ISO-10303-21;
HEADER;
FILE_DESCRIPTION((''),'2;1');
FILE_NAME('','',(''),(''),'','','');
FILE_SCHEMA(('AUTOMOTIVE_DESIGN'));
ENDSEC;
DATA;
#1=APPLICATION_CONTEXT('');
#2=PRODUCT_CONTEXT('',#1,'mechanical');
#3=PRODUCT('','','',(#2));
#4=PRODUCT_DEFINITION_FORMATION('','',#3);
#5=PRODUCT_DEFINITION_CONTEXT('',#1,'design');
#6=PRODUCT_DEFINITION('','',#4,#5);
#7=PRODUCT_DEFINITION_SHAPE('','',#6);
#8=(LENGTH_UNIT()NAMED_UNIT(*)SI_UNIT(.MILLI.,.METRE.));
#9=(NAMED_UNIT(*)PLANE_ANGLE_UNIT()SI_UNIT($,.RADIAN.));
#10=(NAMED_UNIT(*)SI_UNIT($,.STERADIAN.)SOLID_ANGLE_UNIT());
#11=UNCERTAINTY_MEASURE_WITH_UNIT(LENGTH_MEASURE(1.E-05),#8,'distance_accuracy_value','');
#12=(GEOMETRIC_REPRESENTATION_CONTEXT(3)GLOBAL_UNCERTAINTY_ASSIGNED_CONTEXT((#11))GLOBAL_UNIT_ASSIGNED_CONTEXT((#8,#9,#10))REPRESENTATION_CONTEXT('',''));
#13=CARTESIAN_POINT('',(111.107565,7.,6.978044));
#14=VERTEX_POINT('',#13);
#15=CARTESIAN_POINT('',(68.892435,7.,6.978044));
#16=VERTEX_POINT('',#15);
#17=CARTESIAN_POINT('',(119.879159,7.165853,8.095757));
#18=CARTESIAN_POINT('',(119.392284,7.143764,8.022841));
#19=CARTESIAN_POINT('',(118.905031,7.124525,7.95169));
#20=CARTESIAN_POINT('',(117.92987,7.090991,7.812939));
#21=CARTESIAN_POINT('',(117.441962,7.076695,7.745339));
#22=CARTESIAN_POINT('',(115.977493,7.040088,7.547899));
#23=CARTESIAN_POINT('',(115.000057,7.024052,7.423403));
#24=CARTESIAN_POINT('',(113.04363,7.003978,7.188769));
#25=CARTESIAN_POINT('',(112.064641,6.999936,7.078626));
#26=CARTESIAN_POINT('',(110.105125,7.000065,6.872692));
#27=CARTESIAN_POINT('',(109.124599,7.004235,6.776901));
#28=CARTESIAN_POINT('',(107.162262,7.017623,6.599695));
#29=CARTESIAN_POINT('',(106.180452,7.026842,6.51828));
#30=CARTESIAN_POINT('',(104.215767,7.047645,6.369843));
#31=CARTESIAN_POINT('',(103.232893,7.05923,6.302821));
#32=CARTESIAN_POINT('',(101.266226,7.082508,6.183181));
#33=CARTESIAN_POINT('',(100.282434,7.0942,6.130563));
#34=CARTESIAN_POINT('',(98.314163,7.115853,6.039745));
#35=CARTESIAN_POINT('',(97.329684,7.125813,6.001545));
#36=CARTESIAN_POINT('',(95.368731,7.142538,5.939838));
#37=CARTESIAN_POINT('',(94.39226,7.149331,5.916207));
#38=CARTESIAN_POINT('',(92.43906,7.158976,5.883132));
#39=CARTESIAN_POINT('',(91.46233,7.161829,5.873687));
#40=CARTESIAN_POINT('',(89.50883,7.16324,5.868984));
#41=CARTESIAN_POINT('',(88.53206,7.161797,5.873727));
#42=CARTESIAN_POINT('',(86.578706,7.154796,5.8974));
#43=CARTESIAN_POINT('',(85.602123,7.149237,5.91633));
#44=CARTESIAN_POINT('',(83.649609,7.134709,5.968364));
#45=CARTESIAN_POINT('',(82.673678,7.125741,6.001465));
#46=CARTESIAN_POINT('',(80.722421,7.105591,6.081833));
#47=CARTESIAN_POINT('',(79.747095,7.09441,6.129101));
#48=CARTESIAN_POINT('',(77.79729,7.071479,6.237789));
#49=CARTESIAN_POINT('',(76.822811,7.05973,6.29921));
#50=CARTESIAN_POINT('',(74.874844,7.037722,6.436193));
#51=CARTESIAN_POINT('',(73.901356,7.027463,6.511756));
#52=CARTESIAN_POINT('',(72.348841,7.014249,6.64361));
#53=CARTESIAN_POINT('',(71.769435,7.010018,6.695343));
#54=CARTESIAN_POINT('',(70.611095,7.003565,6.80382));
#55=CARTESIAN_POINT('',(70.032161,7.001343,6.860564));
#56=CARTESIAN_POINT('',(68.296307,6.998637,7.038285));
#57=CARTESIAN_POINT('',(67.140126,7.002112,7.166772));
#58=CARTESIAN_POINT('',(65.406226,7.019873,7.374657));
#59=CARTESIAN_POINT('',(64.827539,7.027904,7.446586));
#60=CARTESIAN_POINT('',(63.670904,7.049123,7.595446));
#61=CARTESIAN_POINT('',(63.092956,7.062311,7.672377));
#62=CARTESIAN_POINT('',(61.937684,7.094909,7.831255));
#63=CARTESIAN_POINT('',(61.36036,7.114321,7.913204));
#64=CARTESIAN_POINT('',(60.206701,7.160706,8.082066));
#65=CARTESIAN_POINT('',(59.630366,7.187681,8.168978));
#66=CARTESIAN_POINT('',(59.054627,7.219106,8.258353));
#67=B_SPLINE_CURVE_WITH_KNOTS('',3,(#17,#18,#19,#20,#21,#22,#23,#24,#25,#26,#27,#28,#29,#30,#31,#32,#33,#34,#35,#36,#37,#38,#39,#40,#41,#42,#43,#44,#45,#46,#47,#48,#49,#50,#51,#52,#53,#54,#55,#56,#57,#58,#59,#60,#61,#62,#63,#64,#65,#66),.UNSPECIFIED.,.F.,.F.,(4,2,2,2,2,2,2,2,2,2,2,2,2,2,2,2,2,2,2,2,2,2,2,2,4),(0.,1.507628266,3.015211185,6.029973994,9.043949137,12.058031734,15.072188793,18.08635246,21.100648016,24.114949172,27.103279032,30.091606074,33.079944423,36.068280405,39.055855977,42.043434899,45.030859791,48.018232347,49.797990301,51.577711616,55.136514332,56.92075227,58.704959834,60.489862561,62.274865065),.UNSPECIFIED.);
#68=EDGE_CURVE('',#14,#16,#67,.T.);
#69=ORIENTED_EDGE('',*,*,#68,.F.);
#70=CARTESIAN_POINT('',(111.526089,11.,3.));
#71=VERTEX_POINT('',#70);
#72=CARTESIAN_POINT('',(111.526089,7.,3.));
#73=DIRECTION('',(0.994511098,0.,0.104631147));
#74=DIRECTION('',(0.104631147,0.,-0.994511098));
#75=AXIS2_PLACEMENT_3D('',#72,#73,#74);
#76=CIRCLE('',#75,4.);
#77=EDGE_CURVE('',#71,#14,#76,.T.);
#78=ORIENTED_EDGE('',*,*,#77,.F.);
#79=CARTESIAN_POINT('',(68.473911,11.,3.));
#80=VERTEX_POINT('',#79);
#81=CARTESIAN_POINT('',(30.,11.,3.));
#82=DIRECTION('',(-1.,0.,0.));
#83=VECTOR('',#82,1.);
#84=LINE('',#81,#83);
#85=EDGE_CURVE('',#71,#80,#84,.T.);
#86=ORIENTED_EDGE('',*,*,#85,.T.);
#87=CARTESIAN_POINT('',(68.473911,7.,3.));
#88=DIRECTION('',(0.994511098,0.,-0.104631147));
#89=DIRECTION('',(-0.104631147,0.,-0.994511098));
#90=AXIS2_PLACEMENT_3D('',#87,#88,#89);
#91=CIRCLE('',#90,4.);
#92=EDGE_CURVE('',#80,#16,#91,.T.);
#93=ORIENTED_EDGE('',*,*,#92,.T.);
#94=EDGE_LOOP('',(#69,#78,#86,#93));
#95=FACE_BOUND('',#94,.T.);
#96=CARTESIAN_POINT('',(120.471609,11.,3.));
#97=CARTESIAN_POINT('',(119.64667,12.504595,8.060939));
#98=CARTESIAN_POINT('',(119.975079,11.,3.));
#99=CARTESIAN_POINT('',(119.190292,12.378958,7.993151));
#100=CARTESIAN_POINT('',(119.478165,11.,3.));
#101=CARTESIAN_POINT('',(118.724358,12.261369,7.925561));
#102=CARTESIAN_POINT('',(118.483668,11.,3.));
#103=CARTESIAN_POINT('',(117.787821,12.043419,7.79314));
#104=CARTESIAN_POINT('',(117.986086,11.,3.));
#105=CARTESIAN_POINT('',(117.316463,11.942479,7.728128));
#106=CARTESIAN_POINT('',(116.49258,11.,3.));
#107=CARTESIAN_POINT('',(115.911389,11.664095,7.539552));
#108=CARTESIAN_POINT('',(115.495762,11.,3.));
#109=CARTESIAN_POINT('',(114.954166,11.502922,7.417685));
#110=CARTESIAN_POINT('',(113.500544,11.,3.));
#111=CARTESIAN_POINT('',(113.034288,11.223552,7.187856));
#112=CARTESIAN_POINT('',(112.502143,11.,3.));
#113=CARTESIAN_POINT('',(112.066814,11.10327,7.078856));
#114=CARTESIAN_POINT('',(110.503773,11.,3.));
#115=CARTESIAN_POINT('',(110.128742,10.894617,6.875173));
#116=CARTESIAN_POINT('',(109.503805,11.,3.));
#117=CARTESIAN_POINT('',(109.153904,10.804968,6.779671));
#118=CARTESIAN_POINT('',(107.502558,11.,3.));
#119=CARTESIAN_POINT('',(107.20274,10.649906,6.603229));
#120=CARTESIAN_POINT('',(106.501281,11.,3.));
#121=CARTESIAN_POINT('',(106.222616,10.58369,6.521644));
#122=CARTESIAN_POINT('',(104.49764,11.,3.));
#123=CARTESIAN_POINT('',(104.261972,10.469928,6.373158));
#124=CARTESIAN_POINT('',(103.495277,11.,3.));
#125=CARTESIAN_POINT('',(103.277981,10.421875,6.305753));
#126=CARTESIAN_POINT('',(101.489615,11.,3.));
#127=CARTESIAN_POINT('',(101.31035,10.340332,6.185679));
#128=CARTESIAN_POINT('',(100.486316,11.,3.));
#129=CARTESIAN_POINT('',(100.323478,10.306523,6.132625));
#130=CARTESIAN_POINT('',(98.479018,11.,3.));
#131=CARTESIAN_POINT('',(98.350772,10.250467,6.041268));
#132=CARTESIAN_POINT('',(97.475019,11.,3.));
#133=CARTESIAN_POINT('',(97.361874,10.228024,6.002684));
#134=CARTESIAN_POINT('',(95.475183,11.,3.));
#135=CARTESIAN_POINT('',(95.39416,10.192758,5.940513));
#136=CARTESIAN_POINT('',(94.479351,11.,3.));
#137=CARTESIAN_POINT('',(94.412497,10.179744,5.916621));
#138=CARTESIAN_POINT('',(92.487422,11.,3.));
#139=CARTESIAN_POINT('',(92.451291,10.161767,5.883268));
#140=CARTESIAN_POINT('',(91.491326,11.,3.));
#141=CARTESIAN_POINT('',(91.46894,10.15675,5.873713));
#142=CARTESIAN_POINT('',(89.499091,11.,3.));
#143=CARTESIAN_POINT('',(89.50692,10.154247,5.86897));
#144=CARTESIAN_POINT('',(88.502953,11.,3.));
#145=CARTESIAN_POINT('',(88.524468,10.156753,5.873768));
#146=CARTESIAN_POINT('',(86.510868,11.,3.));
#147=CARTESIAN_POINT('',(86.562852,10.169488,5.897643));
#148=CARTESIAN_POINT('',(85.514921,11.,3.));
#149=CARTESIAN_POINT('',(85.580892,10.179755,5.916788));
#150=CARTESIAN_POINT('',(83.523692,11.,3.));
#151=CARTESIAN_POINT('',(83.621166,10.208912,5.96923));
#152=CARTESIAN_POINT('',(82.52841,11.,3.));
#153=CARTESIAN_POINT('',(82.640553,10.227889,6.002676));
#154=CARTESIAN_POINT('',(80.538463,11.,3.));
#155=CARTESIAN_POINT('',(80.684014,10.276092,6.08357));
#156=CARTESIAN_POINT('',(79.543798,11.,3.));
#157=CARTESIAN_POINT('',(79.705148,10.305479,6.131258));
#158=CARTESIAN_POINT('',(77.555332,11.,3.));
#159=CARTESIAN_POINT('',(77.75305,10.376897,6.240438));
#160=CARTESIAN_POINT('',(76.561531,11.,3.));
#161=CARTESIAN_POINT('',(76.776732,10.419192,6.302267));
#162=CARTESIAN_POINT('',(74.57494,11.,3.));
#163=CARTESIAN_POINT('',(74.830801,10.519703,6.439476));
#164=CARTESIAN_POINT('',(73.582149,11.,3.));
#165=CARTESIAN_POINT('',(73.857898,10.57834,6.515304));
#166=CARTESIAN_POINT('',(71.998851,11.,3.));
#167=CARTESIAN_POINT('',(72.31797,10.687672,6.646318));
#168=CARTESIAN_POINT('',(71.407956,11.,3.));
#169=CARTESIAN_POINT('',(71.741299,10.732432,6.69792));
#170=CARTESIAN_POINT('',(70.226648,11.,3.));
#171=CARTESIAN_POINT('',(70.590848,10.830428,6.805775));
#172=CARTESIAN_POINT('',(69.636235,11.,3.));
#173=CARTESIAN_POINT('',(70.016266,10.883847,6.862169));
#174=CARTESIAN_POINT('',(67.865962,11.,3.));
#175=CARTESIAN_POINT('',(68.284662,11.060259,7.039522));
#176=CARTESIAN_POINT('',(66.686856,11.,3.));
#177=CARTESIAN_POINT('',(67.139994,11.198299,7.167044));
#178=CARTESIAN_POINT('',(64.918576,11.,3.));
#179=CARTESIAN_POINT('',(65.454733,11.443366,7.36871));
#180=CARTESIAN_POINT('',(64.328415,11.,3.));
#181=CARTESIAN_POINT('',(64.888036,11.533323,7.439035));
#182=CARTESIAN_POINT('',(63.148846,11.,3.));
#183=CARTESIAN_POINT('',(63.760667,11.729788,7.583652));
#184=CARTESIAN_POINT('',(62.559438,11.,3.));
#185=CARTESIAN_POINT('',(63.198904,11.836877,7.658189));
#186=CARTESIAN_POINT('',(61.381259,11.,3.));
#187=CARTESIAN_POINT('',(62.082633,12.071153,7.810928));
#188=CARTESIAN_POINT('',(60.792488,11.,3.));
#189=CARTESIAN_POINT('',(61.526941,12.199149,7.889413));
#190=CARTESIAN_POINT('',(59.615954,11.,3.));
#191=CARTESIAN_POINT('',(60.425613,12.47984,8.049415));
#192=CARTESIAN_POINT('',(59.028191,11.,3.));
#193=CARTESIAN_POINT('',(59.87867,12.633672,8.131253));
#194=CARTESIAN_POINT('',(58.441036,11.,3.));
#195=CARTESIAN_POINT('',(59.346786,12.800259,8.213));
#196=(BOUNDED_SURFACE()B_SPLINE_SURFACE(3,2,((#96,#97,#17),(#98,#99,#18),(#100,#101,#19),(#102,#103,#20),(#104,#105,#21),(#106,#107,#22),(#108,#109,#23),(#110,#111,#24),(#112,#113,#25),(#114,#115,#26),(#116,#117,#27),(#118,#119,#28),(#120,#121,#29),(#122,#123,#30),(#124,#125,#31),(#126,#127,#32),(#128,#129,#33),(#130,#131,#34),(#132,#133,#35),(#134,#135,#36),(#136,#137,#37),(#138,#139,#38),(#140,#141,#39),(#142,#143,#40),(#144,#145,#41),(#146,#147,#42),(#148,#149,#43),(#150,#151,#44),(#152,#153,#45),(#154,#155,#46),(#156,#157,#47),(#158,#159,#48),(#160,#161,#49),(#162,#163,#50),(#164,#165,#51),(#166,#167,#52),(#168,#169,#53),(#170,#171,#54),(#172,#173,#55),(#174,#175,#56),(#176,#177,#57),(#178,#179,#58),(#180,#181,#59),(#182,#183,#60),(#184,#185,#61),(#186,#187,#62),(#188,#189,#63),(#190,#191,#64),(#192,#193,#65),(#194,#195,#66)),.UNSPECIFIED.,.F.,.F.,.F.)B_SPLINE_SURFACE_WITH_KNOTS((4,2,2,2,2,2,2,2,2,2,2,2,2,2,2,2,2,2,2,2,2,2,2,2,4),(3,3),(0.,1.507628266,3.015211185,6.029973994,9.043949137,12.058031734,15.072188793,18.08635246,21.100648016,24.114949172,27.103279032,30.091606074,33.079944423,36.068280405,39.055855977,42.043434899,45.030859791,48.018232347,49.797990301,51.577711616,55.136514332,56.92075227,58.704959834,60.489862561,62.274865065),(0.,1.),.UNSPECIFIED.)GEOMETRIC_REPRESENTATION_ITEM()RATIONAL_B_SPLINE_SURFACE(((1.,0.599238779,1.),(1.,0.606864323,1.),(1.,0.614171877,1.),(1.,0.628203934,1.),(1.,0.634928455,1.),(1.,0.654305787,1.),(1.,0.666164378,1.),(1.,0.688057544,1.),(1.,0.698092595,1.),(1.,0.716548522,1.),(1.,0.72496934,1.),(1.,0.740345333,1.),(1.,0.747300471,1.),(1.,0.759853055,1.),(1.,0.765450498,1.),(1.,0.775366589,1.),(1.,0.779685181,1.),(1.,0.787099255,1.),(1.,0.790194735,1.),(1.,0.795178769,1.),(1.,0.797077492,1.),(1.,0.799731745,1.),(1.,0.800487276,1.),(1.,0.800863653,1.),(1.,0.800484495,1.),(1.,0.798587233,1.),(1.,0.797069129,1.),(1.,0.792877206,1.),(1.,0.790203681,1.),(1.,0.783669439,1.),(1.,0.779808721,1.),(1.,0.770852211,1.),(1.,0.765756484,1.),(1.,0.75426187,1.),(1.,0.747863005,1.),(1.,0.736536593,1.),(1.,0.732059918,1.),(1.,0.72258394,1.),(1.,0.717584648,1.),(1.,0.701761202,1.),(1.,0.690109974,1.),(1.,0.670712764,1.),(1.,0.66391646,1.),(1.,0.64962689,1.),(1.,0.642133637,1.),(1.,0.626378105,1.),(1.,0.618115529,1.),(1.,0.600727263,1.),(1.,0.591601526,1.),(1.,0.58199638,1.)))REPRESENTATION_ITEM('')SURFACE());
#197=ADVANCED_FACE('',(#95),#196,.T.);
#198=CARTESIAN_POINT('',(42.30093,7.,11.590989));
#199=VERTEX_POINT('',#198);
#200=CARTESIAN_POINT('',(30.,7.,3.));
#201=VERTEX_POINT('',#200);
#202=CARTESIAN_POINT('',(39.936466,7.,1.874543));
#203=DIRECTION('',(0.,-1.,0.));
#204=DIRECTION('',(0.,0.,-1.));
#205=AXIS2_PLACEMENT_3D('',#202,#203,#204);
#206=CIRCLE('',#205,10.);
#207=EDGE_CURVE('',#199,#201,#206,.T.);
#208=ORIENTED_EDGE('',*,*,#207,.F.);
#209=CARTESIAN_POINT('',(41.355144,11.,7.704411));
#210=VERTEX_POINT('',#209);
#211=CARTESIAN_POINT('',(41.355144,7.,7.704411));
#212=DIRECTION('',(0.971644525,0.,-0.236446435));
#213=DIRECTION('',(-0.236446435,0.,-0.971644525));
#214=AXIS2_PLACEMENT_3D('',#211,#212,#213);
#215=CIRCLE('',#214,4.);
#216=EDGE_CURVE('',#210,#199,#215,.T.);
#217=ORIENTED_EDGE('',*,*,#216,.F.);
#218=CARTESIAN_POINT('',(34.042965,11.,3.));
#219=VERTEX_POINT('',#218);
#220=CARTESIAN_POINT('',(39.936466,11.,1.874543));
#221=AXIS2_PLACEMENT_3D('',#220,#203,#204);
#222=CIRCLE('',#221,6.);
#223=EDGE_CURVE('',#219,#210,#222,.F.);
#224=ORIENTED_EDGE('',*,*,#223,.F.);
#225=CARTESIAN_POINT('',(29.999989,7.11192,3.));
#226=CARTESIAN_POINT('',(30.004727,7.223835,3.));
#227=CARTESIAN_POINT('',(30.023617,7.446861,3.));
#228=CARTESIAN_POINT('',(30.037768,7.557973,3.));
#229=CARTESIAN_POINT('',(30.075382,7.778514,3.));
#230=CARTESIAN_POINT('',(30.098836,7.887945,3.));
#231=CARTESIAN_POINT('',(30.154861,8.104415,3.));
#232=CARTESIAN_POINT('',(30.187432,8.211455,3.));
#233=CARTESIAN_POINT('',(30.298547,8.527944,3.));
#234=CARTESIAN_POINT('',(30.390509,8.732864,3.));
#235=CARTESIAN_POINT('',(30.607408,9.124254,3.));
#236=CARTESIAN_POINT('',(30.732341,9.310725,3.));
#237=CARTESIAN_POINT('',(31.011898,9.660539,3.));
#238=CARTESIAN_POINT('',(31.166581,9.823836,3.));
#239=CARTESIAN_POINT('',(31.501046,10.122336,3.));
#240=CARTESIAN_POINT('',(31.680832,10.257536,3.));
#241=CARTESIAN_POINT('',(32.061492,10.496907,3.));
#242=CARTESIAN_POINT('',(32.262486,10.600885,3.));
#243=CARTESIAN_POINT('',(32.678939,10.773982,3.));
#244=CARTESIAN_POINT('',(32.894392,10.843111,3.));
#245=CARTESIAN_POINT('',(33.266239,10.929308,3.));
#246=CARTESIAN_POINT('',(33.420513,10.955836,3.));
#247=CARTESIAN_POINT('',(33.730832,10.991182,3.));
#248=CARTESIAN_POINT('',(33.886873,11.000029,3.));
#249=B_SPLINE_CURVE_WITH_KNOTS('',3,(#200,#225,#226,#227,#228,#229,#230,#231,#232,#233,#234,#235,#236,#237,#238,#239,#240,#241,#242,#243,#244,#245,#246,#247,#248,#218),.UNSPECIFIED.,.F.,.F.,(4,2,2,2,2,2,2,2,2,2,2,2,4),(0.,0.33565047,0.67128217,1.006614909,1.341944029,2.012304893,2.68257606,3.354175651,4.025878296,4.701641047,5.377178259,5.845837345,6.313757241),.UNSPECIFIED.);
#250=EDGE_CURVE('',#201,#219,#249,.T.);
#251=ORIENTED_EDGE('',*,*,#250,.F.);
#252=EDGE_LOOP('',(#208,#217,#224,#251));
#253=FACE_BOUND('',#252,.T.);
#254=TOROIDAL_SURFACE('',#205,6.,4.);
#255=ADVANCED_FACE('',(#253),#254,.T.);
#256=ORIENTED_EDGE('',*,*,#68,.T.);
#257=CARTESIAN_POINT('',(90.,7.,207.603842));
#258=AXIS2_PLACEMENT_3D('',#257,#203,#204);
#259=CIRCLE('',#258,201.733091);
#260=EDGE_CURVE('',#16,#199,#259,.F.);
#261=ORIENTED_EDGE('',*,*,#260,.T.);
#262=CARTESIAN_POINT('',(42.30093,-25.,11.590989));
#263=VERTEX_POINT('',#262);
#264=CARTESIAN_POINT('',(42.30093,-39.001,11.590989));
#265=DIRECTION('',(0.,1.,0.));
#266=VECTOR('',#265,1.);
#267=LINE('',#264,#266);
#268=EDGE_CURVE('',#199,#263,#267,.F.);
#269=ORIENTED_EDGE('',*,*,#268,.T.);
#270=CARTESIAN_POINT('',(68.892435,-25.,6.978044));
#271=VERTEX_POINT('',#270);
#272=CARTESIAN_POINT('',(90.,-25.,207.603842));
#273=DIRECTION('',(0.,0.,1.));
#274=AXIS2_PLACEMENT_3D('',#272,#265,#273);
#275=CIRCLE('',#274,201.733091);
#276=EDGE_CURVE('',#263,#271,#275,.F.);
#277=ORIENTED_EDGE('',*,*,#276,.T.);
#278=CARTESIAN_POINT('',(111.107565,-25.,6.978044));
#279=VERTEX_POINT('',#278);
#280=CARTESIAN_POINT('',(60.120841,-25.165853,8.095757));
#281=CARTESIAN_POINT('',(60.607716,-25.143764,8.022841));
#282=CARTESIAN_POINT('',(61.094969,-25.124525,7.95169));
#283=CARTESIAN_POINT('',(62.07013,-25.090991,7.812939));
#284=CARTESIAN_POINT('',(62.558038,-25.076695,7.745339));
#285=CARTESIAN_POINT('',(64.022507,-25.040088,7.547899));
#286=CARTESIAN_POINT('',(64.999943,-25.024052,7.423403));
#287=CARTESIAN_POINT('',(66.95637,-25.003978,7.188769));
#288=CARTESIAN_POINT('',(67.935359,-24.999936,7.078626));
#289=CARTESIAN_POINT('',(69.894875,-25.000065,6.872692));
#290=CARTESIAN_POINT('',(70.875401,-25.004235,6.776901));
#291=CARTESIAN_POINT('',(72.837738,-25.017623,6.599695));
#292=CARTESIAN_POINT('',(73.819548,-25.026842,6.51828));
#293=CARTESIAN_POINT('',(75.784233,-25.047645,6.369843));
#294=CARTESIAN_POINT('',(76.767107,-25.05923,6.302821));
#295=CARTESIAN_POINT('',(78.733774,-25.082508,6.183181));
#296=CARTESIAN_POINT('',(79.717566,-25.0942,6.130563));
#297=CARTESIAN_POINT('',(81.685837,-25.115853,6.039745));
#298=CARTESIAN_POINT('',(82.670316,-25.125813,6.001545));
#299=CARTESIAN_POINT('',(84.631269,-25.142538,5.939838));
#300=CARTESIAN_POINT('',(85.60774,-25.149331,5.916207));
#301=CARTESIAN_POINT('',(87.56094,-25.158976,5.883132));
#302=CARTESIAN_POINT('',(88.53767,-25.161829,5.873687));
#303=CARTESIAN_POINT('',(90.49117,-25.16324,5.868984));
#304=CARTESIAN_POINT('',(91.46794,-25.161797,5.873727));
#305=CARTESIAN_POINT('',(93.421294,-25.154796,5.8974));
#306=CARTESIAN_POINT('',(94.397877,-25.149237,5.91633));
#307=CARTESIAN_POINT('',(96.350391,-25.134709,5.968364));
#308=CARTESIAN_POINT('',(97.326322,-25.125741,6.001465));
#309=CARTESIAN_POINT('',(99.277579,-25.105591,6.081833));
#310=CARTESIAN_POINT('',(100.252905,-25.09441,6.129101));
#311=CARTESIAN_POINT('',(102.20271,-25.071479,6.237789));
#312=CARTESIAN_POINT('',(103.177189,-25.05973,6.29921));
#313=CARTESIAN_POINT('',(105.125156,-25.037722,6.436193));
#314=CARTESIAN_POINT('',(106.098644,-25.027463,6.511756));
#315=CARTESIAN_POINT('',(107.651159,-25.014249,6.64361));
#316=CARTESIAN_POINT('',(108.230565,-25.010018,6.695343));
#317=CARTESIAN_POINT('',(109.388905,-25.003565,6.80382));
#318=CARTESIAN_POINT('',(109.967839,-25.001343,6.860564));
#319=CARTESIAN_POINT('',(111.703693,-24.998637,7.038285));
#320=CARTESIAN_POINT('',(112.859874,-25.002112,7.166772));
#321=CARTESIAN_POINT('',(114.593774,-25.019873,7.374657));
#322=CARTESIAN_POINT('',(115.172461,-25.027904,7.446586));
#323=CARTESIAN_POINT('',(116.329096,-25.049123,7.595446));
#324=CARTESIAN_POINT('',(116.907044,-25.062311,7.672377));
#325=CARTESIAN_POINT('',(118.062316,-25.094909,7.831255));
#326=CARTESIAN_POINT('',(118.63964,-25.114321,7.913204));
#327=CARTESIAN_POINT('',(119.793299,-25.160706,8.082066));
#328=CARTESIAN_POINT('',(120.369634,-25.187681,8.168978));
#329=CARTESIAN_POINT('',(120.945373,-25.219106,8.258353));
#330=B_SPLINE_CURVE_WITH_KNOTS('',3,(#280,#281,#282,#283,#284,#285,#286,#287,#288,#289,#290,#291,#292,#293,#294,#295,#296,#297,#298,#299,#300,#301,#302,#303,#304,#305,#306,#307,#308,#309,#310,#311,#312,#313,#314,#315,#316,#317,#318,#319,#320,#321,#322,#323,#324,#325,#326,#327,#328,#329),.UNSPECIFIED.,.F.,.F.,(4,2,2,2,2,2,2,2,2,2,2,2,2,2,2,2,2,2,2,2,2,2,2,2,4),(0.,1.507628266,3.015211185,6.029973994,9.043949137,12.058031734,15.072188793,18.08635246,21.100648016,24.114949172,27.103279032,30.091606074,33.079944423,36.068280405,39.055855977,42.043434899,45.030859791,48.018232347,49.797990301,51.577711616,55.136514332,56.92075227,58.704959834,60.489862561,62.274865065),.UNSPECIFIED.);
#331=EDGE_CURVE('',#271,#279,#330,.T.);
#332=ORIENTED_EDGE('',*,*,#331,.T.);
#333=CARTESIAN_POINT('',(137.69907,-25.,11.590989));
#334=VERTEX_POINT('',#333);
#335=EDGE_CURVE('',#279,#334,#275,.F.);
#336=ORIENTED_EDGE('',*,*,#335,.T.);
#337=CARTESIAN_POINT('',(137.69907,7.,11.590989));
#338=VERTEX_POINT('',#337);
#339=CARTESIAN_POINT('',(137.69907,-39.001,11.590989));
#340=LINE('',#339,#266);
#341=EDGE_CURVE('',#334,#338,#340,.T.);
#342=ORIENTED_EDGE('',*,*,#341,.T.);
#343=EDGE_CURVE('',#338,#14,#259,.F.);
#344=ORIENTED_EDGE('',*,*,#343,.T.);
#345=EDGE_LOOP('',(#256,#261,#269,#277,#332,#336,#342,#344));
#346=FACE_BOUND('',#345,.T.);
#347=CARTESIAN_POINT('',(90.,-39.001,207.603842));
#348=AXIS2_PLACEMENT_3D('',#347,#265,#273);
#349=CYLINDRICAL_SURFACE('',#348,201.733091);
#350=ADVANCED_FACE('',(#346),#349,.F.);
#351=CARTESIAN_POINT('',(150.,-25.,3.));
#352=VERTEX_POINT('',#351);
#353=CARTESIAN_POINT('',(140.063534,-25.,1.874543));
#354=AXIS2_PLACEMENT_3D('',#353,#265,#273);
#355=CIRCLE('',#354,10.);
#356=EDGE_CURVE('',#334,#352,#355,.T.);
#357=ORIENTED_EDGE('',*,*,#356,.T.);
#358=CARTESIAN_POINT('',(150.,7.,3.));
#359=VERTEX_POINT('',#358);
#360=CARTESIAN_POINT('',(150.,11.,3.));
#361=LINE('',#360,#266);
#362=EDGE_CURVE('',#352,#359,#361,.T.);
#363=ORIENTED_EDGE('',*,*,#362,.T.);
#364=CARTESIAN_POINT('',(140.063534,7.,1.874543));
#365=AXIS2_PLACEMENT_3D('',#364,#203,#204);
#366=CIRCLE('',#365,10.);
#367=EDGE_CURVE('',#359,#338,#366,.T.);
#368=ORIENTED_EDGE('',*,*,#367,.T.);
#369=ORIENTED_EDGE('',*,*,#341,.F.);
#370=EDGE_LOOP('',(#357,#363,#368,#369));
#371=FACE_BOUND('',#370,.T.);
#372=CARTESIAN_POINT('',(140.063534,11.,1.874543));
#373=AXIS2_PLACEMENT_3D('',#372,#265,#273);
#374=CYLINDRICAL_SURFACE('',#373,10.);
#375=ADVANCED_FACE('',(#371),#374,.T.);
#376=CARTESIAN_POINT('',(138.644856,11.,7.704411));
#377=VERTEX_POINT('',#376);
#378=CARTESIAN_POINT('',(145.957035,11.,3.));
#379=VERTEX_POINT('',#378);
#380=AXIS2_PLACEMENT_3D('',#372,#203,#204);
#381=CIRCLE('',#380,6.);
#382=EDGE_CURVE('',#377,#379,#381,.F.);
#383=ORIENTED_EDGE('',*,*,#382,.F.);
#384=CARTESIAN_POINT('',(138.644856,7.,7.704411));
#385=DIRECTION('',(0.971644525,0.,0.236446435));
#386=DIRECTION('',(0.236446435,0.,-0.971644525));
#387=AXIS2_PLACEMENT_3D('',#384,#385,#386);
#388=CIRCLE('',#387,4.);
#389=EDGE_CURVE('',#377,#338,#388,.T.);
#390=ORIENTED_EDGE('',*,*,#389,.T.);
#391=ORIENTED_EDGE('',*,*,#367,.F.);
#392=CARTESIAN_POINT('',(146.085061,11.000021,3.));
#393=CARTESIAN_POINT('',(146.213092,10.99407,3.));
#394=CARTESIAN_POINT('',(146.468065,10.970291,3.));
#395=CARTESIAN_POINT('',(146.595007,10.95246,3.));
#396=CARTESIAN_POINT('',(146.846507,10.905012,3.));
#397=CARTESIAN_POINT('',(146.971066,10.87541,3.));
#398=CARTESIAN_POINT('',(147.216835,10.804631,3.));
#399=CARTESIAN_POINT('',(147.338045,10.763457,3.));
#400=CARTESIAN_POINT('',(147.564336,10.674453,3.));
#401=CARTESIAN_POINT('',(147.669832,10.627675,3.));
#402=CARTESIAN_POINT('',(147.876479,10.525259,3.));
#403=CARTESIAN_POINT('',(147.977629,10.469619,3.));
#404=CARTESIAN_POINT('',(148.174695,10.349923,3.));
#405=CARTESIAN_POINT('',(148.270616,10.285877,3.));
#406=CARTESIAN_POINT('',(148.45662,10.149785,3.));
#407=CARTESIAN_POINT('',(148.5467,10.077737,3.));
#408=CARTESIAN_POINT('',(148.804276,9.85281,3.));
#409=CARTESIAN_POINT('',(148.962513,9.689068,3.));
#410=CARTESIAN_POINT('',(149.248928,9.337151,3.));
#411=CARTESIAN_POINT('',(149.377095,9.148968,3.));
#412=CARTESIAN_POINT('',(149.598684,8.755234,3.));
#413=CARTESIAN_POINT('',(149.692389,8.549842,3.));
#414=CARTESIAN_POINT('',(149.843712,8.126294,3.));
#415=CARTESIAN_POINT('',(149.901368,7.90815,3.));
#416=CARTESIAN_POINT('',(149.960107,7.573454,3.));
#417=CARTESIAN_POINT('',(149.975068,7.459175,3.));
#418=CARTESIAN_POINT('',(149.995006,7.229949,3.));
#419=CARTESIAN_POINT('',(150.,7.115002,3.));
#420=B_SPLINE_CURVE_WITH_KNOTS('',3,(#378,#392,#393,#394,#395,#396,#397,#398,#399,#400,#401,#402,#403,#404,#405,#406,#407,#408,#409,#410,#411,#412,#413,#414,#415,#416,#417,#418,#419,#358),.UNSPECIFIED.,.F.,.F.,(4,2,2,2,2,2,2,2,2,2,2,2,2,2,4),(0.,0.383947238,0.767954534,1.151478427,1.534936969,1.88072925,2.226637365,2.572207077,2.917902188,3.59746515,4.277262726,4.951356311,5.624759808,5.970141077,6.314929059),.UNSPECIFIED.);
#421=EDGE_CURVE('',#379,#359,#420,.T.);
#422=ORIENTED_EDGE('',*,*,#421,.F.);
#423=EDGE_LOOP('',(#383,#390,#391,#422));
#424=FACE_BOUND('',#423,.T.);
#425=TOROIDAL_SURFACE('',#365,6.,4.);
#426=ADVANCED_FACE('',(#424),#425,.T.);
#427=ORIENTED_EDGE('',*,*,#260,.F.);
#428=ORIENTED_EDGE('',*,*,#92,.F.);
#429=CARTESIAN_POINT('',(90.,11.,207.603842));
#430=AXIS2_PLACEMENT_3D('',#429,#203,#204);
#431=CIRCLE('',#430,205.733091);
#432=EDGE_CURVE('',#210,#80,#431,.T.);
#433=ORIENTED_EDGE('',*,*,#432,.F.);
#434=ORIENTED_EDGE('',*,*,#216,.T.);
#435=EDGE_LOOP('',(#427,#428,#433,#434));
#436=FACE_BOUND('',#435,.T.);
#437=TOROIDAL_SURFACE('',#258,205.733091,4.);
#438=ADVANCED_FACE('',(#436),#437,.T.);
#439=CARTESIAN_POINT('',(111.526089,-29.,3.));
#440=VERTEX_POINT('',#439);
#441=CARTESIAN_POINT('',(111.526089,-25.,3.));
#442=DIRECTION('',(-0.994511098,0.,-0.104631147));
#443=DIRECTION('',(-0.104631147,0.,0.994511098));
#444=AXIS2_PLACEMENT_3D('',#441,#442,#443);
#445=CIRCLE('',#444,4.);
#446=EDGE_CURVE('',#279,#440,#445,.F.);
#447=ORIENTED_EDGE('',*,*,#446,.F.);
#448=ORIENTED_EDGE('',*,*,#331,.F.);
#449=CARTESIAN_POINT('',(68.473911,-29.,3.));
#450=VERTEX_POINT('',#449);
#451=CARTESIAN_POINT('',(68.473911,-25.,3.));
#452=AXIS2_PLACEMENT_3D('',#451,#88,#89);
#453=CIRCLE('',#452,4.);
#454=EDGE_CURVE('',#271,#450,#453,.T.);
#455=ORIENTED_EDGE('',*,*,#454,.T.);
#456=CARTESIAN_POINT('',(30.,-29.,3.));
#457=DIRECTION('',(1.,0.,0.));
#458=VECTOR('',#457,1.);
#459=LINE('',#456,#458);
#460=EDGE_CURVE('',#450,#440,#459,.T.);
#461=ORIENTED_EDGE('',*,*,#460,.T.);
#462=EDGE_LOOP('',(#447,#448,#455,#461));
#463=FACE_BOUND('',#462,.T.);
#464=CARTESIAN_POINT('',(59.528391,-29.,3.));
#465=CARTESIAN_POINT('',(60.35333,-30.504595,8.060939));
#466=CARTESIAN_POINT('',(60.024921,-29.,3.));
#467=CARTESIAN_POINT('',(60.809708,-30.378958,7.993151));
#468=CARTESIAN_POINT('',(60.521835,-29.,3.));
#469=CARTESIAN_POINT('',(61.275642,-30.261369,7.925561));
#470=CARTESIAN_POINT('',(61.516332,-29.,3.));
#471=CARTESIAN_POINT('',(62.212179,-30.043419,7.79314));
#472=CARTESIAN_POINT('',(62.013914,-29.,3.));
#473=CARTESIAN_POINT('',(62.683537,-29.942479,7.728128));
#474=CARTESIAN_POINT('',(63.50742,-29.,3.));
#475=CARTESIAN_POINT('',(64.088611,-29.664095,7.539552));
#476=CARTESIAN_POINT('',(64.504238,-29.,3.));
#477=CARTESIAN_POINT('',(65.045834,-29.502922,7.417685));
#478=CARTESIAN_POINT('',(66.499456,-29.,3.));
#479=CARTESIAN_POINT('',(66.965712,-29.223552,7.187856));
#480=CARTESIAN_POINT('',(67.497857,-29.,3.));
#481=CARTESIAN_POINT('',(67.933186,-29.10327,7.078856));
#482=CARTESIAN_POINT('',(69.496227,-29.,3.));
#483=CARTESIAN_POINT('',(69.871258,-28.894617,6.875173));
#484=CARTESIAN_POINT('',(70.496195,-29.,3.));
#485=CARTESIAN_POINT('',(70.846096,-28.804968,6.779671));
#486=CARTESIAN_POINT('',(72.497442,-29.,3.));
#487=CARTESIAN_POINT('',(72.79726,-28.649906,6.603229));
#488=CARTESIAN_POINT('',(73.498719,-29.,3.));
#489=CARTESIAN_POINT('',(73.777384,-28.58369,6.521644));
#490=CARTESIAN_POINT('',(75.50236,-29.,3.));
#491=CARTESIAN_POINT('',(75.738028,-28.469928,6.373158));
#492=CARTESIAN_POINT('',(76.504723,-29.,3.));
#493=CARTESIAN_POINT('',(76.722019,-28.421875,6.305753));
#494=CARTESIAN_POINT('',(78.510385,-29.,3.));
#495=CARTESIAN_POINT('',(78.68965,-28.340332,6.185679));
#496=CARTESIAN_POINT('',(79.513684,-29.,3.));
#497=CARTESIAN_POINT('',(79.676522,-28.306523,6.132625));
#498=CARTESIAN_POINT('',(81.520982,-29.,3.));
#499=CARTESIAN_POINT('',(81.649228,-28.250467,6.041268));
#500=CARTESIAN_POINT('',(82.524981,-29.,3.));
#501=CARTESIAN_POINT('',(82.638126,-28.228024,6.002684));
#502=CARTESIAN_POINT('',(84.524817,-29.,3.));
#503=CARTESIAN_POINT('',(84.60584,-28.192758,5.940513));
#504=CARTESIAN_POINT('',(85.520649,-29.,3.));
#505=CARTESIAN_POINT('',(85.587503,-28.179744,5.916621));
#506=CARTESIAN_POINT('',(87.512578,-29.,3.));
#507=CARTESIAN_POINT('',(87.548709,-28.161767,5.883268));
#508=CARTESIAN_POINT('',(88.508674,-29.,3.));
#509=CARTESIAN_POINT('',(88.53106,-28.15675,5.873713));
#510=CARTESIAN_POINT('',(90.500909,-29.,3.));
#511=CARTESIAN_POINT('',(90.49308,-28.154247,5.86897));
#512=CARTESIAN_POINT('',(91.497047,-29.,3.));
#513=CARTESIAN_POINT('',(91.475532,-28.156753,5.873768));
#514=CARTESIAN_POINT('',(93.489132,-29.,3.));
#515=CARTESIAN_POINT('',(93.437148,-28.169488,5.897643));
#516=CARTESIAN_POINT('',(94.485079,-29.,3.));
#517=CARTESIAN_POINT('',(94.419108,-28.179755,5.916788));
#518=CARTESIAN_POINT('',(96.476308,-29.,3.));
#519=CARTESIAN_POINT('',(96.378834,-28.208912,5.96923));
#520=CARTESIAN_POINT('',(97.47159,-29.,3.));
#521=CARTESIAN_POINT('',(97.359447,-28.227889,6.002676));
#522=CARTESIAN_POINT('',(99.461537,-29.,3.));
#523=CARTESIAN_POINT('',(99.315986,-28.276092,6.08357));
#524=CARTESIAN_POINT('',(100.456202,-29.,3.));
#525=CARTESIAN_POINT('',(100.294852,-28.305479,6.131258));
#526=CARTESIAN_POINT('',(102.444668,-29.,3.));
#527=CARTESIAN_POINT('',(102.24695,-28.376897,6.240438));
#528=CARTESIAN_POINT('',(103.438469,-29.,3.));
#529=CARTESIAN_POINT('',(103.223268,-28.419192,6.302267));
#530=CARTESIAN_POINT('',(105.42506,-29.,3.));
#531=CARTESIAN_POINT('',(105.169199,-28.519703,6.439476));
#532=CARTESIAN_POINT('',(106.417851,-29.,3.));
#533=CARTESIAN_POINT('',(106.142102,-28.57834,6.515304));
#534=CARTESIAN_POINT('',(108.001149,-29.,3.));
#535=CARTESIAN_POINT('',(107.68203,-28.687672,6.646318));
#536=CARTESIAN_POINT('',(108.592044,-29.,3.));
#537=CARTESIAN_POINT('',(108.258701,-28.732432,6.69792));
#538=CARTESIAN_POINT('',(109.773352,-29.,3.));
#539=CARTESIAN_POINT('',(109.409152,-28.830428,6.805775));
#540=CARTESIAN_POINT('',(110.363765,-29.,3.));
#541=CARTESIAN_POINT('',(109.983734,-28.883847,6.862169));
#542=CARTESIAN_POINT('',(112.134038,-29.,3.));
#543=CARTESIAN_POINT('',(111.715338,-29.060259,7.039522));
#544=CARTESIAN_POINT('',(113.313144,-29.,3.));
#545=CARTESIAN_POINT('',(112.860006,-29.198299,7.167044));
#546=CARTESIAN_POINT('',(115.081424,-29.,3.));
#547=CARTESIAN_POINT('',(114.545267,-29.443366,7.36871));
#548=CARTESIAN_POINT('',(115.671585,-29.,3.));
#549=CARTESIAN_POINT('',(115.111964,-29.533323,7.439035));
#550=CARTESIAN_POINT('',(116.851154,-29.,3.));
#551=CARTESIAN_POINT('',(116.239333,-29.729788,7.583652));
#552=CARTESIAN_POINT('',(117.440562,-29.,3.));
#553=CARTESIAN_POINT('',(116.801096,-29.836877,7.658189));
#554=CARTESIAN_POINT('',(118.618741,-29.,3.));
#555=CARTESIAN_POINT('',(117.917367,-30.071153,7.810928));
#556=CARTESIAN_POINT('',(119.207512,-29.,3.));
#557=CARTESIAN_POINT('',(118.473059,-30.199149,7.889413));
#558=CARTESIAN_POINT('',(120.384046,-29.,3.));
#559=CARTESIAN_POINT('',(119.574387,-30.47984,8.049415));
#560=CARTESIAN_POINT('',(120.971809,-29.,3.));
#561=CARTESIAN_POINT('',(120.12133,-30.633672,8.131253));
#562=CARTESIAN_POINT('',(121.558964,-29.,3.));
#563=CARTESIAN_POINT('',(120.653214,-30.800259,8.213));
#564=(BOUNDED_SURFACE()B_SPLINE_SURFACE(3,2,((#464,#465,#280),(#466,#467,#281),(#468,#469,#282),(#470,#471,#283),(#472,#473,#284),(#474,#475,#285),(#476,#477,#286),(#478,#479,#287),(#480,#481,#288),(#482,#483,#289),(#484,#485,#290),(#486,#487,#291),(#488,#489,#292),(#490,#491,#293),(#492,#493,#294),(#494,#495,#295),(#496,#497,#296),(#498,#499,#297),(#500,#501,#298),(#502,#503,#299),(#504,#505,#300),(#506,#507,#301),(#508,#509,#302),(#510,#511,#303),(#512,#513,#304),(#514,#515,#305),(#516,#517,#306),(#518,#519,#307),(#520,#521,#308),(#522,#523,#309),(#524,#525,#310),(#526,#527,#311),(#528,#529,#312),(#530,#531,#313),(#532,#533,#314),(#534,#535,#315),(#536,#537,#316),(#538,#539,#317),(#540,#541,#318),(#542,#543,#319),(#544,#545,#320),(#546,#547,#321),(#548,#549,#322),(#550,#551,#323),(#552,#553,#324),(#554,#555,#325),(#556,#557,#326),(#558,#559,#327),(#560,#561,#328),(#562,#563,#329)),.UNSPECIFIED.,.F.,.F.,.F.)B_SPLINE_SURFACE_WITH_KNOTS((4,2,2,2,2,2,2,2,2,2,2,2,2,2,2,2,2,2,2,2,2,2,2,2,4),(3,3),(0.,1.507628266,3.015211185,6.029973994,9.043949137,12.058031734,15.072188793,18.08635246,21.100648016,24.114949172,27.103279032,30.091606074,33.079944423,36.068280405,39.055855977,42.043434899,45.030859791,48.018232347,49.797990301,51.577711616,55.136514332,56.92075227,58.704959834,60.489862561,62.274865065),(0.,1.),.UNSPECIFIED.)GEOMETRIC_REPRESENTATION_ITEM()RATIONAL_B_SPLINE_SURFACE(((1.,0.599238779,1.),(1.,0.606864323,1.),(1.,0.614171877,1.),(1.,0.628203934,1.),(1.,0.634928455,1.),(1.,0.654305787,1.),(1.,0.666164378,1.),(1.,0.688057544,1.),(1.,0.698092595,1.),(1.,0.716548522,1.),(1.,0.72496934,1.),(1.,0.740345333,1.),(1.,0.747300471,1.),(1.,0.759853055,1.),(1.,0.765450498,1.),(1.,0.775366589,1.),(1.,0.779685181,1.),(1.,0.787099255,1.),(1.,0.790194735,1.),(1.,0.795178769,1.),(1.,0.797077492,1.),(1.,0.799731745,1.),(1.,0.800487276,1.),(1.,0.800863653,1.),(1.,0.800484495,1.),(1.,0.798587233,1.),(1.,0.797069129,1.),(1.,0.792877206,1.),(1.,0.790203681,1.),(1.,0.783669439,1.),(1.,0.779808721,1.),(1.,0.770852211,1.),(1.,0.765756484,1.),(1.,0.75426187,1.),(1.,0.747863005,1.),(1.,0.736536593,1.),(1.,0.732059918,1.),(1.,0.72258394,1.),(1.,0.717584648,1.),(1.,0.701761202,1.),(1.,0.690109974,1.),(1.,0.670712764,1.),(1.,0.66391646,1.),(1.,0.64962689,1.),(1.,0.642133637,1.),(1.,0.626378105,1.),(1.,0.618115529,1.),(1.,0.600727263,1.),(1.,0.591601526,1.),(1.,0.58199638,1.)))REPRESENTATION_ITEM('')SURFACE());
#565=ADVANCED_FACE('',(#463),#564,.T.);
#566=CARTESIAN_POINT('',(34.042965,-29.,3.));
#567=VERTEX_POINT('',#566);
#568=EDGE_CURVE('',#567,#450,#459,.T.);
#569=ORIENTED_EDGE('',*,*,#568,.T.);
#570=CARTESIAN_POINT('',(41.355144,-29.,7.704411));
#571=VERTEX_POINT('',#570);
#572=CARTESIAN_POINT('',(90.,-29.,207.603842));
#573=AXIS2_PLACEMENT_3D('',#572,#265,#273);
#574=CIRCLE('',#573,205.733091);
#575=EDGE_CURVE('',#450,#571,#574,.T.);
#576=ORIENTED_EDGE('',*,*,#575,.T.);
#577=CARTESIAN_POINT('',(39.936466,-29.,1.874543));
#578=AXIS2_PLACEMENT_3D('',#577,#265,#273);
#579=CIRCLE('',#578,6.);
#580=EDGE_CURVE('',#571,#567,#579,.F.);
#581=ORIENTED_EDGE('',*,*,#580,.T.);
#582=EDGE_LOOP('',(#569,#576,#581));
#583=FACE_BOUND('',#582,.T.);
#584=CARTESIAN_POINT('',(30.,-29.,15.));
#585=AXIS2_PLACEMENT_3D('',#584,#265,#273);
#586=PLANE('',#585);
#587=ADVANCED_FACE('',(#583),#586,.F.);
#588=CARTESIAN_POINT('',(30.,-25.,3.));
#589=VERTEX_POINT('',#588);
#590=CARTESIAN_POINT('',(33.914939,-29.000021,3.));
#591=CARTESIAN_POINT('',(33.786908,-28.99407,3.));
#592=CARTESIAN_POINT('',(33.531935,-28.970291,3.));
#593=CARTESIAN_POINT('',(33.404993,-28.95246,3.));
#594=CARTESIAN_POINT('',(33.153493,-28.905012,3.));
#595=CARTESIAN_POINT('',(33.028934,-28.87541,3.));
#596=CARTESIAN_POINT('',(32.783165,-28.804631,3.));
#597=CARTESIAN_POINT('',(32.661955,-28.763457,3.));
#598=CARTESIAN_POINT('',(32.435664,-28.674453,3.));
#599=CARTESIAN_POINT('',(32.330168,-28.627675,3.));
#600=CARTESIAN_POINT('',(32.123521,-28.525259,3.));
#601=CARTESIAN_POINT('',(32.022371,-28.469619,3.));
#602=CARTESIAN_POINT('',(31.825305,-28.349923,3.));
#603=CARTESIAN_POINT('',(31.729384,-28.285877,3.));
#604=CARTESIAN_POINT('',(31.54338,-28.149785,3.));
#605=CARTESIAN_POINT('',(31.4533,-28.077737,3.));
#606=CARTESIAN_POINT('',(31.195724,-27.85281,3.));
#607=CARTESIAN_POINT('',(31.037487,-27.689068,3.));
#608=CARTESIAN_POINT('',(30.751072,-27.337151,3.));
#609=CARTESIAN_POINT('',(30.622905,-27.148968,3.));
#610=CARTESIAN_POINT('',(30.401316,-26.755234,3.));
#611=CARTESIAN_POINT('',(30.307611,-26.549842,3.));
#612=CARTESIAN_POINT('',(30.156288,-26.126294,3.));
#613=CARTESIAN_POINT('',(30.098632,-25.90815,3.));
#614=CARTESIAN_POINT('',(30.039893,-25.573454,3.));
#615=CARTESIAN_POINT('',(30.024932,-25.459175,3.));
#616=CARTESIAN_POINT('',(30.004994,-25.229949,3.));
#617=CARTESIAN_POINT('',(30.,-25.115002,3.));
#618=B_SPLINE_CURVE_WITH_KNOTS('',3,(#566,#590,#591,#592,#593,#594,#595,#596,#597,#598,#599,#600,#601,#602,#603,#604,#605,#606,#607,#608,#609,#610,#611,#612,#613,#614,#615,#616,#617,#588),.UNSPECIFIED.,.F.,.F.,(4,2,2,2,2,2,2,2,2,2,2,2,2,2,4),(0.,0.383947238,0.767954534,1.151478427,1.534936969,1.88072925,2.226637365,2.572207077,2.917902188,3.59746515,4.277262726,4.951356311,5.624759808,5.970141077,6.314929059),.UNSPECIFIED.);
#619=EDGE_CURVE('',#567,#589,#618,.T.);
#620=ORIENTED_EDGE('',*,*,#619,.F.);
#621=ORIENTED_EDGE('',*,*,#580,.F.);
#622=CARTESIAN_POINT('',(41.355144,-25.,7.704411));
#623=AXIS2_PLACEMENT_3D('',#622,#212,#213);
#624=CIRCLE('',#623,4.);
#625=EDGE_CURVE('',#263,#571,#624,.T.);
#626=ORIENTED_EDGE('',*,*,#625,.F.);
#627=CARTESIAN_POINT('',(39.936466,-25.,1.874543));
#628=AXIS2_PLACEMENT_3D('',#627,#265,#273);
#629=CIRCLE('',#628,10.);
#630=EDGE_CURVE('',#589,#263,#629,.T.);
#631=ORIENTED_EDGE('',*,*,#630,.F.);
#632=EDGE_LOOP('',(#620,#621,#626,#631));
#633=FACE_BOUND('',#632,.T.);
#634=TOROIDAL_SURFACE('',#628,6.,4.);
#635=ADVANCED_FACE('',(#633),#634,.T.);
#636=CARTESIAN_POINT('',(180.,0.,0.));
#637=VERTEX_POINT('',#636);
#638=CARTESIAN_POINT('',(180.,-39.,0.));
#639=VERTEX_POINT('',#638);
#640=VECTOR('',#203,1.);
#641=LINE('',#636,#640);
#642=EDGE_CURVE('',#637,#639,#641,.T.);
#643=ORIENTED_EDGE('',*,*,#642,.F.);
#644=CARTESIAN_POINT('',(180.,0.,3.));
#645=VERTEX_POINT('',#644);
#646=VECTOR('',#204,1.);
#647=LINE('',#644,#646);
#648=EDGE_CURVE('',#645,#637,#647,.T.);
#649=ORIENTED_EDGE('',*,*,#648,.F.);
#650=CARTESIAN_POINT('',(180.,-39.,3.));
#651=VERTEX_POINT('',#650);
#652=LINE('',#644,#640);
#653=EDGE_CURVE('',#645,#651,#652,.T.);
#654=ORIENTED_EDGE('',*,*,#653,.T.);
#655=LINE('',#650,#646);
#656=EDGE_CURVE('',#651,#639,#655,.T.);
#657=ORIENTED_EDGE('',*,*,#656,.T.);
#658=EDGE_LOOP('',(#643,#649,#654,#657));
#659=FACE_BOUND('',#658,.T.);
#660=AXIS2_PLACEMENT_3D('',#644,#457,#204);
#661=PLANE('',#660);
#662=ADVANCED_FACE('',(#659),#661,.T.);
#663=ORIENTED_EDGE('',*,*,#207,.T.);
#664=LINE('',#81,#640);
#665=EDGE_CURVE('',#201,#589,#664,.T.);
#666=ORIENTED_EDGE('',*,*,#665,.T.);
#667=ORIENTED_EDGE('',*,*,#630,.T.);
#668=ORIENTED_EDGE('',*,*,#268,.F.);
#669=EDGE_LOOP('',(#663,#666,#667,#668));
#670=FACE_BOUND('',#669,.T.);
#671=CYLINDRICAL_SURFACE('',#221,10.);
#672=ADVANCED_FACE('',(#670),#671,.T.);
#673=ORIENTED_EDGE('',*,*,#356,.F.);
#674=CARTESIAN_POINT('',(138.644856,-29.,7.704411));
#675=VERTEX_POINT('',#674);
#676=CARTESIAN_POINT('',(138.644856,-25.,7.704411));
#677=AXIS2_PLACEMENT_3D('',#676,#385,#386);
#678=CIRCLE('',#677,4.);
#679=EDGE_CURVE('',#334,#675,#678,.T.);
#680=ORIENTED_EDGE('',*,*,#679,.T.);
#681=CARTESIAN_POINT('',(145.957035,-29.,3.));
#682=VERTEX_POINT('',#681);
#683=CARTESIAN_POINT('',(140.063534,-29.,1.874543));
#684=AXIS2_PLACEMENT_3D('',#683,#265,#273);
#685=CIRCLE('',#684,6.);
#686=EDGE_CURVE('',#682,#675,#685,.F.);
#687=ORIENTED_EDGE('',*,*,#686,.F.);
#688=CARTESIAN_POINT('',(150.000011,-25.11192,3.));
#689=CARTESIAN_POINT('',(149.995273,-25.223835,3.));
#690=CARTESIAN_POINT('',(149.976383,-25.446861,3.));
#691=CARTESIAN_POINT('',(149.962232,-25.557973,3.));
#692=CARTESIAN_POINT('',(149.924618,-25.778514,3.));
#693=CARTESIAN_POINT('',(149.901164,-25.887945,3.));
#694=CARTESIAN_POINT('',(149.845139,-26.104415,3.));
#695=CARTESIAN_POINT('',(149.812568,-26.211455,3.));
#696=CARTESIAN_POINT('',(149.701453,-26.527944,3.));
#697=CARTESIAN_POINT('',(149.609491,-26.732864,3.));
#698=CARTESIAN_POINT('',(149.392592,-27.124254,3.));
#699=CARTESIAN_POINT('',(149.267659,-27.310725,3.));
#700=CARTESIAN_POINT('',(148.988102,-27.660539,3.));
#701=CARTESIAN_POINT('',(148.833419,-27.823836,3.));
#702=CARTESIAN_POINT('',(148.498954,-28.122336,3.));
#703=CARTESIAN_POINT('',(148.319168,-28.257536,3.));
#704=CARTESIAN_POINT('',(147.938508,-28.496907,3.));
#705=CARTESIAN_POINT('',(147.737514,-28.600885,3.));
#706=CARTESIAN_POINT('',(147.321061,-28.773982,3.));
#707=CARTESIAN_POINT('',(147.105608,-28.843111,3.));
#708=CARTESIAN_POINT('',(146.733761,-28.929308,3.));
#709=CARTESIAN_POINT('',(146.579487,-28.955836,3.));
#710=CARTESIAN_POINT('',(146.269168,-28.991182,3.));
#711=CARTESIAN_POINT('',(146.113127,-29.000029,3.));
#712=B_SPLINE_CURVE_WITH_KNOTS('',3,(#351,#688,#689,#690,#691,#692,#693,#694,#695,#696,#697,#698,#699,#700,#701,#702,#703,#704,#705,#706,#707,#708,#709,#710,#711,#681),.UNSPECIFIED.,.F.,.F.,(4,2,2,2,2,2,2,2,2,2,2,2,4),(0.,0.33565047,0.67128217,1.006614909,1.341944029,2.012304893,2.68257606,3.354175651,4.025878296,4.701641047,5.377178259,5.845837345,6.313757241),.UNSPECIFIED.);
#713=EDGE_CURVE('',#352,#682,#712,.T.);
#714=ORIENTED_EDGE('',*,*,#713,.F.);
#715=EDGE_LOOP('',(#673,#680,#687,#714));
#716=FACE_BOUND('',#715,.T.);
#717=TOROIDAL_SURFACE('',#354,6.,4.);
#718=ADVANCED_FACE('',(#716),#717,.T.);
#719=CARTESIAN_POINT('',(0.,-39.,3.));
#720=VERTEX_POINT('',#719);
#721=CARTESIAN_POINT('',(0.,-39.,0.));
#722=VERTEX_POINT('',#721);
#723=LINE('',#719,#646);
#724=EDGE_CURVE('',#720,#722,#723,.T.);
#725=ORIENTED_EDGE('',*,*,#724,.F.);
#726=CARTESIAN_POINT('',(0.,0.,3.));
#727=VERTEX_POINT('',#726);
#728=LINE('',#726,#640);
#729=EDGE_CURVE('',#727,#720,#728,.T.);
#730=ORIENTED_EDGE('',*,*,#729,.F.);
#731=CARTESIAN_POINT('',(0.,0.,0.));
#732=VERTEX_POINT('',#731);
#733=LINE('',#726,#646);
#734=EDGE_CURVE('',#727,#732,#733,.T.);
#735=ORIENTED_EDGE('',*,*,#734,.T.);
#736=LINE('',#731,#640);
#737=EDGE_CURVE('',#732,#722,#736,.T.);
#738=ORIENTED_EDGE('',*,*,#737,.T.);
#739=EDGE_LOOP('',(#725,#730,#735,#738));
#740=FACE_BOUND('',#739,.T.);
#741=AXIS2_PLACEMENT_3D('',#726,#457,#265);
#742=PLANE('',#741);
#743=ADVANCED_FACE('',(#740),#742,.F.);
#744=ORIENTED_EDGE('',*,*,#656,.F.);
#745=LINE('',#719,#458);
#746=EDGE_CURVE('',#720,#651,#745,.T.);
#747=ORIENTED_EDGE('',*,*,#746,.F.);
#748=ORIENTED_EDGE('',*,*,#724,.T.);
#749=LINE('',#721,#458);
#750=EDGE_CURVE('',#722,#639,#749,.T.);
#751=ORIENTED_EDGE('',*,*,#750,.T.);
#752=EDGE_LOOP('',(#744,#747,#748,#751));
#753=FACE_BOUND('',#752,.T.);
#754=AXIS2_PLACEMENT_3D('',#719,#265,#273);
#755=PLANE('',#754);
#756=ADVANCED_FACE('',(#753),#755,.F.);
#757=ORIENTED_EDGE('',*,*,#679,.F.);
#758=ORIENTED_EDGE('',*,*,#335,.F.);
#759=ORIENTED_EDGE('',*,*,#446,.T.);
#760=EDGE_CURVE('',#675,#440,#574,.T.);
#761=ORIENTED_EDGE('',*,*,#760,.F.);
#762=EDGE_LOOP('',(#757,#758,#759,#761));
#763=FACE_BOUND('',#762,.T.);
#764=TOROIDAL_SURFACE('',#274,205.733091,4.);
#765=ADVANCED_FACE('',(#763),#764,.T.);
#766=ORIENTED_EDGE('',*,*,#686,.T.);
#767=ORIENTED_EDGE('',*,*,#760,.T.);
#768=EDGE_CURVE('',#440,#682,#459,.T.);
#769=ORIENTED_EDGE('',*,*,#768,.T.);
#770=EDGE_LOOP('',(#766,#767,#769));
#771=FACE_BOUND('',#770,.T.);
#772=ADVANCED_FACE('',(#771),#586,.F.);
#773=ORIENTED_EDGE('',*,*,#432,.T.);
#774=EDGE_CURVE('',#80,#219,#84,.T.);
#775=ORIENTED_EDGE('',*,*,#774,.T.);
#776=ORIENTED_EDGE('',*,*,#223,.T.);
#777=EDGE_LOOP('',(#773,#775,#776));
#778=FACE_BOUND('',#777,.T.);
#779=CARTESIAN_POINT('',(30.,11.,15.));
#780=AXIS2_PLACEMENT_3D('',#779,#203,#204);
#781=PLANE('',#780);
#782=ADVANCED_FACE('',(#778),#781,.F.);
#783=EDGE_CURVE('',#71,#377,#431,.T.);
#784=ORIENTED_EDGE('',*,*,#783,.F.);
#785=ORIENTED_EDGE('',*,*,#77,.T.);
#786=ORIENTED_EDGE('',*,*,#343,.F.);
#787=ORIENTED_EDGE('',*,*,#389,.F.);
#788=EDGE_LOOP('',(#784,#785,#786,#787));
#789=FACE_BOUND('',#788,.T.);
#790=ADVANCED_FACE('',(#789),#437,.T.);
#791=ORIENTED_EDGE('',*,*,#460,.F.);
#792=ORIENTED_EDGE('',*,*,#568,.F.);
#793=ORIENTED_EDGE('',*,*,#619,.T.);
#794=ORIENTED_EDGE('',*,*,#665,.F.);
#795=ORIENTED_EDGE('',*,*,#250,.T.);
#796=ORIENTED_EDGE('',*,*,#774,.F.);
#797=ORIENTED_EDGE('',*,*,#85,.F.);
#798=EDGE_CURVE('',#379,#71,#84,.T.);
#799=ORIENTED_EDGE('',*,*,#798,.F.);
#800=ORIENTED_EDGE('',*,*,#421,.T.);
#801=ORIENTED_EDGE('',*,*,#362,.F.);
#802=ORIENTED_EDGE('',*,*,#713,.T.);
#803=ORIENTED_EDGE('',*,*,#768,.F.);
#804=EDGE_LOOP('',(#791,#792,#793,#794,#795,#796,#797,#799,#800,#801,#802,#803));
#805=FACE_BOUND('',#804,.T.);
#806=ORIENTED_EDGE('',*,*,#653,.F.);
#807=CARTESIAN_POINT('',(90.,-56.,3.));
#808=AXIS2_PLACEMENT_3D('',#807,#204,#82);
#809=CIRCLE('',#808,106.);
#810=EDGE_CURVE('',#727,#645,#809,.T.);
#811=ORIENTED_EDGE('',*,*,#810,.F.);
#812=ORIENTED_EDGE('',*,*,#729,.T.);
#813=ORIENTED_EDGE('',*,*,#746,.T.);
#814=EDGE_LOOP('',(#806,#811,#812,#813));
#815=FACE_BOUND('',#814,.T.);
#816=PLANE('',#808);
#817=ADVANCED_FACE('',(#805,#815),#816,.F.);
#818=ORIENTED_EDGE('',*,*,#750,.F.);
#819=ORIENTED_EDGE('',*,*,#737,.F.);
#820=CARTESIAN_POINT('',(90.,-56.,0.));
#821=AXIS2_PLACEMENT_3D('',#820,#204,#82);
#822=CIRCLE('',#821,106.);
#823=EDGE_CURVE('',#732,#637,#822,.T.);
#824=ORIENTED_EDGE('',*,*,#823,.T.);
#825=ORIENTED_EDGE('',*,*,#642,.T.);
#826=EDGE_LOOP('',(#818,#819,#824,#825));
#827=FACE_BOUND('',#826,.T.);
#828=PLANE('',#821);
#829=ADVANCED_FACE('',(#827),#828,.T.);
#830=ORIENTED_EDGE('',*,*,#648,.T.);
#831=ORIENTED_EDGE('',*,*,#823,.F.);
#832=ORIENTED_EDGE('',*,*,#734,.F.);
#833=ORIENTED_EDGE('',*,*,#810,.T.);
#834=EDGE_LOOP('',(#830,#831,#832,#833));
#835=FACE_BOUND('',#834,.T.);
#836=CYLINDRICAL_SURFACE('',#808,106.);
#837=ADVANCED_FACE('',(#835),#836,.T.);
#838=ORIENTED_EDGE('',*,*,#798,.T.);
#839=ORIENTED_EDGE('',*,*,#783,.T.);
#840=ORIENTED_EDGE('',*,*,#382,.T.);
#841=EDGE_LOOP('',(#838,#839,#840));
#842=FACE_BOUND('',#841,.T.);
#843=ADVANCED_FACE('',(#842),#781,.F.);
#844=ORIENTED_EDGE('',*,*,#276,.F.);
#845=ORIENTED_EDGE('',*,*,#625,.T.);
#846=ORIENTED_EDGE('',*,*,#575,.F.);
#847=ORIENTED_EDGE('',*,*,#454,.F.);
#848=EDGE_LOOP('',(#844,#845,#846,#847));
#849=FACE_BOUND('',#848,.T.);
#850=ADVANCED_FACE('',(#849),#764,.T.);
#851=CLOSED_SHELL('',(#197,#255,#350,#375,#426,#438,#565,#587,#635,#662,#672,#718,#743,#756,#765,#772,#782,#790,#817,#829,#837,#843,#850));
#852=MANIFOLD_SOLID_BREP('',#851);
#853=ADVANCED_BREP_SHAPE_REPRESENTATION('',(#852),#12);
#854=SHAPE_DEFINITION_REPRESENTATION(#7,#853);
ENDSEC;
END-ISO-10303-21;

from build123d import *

# Parameters (mm, degrees)
BOSS_EXTRUDE1_DEPTH = 3
SKETCH2_W           = 120
SKETCH2_H           = 40
BOSS_EXTRUDE2_DEPTH = 12
CUT_EXTRUDE1_REACH  = 189.417
FILLET1_R           = 10
FILLET2_R           = 4


with BuildPart() as part:
    # Sketch1 → Boss-Extrude1 (new body)
    with BuildSketch(Plane.XY):
        with BuildLine():
            Line((180, 0), (180, -39))
            Line((180, -39), (0, -39))
            Line((0, -39), (0, 0))
            ThreePointArc((0, 0), (90, 50), (180, 0))
        make_face()
    extrude(amount=BOSS_EXTRUDE1_DEPTH)

    # Sketch2 → Boss-Extrude2 (add)
    with BuildSketch(Plane.XY.offset(3)):
        with Locations((90, -9)):
            Rectangle(SKETCH2_W, SKETCH2_H)
    extrude(amount=BOSS_EXTRUDE2_DEPTH)

    # Sketch3 → Cut-Extrude1 (cut, up to next)
    with BuildSketch(Plane(origin=(0, 11, 0), x_dir=(1, 0, 0), z_dir=(0, 1, 0)), mode=Mode.PRIVATE) as cut_extrude1_sk1:
        with BuildLine():
            Line((30, -15), (150, -15))
            ThreePointArc((150, -15), (90, -5.870751133), (30, -15))
        make_face()
    cut_extrude1_tool1 = extrude(cut_extrude1_sk1.sketch, amount=-CUT_EXTRUDE1_REACH, mode=Mode.PRIVATE) & part.part
    add(cut_extrude1_tool1.solids().sort_by_distance((90, 11, 11.341124))[0], mode=Mode.SUBTRACT)

    # Fillet1
    # the kernel refuses this fillet: 10 mm, written as the material it takes off along each edge
    with BuildSketch(Plane(origin=(150, 42.911423728, 15), x_dir=(0, 0, -1), z_dir=(0, -1, 0)), Plane(origin=(30, -60.911423728, 15), x_dir=(0, 0, -1), z_dir=(0, 1, 0))) as fillet1_piece_1:
        with BuildLine():
            CenterArc((13.125456564, -9.936465545), FILLET1_R, 96.462082414, 97.214818073)
            Line((3.409011311, -12.300929891), (3.214682406, -12.348219178))
            ThreePointArc((3.214682406, -12.348219178), (1.609086457, -6.176908891), (-0.190949181, -0.059484539))
            Line((-0.190949181, -0.059484539), (0, 0.2))
            ThreePointArc((0, 0.2), (6, 0.2), (11.977490869, 0.198729311))
            Line((11.977490869, 0.198729311), (12, 0))
        make_face()
    extrude(amount=103.822847456, mode=Mode.SUBTRACT)

    # Fillet2
    fillet2_edges = [part.edges().sort_by_distance(p)[0] for p in [
        (90, -29, 5.870751133),
        (90, 11, 5.870751133),
        (34.210640521, 11, 10.073014501),
        (145.789359479, 11, 10.073014501),
        (34.210640521, -29, 10.073014501),
        (145.789359479, -29, 10.073014501),
    ]]
    fillet(fillet2_edges, radius=FILLET2_R)


solid = part.part
